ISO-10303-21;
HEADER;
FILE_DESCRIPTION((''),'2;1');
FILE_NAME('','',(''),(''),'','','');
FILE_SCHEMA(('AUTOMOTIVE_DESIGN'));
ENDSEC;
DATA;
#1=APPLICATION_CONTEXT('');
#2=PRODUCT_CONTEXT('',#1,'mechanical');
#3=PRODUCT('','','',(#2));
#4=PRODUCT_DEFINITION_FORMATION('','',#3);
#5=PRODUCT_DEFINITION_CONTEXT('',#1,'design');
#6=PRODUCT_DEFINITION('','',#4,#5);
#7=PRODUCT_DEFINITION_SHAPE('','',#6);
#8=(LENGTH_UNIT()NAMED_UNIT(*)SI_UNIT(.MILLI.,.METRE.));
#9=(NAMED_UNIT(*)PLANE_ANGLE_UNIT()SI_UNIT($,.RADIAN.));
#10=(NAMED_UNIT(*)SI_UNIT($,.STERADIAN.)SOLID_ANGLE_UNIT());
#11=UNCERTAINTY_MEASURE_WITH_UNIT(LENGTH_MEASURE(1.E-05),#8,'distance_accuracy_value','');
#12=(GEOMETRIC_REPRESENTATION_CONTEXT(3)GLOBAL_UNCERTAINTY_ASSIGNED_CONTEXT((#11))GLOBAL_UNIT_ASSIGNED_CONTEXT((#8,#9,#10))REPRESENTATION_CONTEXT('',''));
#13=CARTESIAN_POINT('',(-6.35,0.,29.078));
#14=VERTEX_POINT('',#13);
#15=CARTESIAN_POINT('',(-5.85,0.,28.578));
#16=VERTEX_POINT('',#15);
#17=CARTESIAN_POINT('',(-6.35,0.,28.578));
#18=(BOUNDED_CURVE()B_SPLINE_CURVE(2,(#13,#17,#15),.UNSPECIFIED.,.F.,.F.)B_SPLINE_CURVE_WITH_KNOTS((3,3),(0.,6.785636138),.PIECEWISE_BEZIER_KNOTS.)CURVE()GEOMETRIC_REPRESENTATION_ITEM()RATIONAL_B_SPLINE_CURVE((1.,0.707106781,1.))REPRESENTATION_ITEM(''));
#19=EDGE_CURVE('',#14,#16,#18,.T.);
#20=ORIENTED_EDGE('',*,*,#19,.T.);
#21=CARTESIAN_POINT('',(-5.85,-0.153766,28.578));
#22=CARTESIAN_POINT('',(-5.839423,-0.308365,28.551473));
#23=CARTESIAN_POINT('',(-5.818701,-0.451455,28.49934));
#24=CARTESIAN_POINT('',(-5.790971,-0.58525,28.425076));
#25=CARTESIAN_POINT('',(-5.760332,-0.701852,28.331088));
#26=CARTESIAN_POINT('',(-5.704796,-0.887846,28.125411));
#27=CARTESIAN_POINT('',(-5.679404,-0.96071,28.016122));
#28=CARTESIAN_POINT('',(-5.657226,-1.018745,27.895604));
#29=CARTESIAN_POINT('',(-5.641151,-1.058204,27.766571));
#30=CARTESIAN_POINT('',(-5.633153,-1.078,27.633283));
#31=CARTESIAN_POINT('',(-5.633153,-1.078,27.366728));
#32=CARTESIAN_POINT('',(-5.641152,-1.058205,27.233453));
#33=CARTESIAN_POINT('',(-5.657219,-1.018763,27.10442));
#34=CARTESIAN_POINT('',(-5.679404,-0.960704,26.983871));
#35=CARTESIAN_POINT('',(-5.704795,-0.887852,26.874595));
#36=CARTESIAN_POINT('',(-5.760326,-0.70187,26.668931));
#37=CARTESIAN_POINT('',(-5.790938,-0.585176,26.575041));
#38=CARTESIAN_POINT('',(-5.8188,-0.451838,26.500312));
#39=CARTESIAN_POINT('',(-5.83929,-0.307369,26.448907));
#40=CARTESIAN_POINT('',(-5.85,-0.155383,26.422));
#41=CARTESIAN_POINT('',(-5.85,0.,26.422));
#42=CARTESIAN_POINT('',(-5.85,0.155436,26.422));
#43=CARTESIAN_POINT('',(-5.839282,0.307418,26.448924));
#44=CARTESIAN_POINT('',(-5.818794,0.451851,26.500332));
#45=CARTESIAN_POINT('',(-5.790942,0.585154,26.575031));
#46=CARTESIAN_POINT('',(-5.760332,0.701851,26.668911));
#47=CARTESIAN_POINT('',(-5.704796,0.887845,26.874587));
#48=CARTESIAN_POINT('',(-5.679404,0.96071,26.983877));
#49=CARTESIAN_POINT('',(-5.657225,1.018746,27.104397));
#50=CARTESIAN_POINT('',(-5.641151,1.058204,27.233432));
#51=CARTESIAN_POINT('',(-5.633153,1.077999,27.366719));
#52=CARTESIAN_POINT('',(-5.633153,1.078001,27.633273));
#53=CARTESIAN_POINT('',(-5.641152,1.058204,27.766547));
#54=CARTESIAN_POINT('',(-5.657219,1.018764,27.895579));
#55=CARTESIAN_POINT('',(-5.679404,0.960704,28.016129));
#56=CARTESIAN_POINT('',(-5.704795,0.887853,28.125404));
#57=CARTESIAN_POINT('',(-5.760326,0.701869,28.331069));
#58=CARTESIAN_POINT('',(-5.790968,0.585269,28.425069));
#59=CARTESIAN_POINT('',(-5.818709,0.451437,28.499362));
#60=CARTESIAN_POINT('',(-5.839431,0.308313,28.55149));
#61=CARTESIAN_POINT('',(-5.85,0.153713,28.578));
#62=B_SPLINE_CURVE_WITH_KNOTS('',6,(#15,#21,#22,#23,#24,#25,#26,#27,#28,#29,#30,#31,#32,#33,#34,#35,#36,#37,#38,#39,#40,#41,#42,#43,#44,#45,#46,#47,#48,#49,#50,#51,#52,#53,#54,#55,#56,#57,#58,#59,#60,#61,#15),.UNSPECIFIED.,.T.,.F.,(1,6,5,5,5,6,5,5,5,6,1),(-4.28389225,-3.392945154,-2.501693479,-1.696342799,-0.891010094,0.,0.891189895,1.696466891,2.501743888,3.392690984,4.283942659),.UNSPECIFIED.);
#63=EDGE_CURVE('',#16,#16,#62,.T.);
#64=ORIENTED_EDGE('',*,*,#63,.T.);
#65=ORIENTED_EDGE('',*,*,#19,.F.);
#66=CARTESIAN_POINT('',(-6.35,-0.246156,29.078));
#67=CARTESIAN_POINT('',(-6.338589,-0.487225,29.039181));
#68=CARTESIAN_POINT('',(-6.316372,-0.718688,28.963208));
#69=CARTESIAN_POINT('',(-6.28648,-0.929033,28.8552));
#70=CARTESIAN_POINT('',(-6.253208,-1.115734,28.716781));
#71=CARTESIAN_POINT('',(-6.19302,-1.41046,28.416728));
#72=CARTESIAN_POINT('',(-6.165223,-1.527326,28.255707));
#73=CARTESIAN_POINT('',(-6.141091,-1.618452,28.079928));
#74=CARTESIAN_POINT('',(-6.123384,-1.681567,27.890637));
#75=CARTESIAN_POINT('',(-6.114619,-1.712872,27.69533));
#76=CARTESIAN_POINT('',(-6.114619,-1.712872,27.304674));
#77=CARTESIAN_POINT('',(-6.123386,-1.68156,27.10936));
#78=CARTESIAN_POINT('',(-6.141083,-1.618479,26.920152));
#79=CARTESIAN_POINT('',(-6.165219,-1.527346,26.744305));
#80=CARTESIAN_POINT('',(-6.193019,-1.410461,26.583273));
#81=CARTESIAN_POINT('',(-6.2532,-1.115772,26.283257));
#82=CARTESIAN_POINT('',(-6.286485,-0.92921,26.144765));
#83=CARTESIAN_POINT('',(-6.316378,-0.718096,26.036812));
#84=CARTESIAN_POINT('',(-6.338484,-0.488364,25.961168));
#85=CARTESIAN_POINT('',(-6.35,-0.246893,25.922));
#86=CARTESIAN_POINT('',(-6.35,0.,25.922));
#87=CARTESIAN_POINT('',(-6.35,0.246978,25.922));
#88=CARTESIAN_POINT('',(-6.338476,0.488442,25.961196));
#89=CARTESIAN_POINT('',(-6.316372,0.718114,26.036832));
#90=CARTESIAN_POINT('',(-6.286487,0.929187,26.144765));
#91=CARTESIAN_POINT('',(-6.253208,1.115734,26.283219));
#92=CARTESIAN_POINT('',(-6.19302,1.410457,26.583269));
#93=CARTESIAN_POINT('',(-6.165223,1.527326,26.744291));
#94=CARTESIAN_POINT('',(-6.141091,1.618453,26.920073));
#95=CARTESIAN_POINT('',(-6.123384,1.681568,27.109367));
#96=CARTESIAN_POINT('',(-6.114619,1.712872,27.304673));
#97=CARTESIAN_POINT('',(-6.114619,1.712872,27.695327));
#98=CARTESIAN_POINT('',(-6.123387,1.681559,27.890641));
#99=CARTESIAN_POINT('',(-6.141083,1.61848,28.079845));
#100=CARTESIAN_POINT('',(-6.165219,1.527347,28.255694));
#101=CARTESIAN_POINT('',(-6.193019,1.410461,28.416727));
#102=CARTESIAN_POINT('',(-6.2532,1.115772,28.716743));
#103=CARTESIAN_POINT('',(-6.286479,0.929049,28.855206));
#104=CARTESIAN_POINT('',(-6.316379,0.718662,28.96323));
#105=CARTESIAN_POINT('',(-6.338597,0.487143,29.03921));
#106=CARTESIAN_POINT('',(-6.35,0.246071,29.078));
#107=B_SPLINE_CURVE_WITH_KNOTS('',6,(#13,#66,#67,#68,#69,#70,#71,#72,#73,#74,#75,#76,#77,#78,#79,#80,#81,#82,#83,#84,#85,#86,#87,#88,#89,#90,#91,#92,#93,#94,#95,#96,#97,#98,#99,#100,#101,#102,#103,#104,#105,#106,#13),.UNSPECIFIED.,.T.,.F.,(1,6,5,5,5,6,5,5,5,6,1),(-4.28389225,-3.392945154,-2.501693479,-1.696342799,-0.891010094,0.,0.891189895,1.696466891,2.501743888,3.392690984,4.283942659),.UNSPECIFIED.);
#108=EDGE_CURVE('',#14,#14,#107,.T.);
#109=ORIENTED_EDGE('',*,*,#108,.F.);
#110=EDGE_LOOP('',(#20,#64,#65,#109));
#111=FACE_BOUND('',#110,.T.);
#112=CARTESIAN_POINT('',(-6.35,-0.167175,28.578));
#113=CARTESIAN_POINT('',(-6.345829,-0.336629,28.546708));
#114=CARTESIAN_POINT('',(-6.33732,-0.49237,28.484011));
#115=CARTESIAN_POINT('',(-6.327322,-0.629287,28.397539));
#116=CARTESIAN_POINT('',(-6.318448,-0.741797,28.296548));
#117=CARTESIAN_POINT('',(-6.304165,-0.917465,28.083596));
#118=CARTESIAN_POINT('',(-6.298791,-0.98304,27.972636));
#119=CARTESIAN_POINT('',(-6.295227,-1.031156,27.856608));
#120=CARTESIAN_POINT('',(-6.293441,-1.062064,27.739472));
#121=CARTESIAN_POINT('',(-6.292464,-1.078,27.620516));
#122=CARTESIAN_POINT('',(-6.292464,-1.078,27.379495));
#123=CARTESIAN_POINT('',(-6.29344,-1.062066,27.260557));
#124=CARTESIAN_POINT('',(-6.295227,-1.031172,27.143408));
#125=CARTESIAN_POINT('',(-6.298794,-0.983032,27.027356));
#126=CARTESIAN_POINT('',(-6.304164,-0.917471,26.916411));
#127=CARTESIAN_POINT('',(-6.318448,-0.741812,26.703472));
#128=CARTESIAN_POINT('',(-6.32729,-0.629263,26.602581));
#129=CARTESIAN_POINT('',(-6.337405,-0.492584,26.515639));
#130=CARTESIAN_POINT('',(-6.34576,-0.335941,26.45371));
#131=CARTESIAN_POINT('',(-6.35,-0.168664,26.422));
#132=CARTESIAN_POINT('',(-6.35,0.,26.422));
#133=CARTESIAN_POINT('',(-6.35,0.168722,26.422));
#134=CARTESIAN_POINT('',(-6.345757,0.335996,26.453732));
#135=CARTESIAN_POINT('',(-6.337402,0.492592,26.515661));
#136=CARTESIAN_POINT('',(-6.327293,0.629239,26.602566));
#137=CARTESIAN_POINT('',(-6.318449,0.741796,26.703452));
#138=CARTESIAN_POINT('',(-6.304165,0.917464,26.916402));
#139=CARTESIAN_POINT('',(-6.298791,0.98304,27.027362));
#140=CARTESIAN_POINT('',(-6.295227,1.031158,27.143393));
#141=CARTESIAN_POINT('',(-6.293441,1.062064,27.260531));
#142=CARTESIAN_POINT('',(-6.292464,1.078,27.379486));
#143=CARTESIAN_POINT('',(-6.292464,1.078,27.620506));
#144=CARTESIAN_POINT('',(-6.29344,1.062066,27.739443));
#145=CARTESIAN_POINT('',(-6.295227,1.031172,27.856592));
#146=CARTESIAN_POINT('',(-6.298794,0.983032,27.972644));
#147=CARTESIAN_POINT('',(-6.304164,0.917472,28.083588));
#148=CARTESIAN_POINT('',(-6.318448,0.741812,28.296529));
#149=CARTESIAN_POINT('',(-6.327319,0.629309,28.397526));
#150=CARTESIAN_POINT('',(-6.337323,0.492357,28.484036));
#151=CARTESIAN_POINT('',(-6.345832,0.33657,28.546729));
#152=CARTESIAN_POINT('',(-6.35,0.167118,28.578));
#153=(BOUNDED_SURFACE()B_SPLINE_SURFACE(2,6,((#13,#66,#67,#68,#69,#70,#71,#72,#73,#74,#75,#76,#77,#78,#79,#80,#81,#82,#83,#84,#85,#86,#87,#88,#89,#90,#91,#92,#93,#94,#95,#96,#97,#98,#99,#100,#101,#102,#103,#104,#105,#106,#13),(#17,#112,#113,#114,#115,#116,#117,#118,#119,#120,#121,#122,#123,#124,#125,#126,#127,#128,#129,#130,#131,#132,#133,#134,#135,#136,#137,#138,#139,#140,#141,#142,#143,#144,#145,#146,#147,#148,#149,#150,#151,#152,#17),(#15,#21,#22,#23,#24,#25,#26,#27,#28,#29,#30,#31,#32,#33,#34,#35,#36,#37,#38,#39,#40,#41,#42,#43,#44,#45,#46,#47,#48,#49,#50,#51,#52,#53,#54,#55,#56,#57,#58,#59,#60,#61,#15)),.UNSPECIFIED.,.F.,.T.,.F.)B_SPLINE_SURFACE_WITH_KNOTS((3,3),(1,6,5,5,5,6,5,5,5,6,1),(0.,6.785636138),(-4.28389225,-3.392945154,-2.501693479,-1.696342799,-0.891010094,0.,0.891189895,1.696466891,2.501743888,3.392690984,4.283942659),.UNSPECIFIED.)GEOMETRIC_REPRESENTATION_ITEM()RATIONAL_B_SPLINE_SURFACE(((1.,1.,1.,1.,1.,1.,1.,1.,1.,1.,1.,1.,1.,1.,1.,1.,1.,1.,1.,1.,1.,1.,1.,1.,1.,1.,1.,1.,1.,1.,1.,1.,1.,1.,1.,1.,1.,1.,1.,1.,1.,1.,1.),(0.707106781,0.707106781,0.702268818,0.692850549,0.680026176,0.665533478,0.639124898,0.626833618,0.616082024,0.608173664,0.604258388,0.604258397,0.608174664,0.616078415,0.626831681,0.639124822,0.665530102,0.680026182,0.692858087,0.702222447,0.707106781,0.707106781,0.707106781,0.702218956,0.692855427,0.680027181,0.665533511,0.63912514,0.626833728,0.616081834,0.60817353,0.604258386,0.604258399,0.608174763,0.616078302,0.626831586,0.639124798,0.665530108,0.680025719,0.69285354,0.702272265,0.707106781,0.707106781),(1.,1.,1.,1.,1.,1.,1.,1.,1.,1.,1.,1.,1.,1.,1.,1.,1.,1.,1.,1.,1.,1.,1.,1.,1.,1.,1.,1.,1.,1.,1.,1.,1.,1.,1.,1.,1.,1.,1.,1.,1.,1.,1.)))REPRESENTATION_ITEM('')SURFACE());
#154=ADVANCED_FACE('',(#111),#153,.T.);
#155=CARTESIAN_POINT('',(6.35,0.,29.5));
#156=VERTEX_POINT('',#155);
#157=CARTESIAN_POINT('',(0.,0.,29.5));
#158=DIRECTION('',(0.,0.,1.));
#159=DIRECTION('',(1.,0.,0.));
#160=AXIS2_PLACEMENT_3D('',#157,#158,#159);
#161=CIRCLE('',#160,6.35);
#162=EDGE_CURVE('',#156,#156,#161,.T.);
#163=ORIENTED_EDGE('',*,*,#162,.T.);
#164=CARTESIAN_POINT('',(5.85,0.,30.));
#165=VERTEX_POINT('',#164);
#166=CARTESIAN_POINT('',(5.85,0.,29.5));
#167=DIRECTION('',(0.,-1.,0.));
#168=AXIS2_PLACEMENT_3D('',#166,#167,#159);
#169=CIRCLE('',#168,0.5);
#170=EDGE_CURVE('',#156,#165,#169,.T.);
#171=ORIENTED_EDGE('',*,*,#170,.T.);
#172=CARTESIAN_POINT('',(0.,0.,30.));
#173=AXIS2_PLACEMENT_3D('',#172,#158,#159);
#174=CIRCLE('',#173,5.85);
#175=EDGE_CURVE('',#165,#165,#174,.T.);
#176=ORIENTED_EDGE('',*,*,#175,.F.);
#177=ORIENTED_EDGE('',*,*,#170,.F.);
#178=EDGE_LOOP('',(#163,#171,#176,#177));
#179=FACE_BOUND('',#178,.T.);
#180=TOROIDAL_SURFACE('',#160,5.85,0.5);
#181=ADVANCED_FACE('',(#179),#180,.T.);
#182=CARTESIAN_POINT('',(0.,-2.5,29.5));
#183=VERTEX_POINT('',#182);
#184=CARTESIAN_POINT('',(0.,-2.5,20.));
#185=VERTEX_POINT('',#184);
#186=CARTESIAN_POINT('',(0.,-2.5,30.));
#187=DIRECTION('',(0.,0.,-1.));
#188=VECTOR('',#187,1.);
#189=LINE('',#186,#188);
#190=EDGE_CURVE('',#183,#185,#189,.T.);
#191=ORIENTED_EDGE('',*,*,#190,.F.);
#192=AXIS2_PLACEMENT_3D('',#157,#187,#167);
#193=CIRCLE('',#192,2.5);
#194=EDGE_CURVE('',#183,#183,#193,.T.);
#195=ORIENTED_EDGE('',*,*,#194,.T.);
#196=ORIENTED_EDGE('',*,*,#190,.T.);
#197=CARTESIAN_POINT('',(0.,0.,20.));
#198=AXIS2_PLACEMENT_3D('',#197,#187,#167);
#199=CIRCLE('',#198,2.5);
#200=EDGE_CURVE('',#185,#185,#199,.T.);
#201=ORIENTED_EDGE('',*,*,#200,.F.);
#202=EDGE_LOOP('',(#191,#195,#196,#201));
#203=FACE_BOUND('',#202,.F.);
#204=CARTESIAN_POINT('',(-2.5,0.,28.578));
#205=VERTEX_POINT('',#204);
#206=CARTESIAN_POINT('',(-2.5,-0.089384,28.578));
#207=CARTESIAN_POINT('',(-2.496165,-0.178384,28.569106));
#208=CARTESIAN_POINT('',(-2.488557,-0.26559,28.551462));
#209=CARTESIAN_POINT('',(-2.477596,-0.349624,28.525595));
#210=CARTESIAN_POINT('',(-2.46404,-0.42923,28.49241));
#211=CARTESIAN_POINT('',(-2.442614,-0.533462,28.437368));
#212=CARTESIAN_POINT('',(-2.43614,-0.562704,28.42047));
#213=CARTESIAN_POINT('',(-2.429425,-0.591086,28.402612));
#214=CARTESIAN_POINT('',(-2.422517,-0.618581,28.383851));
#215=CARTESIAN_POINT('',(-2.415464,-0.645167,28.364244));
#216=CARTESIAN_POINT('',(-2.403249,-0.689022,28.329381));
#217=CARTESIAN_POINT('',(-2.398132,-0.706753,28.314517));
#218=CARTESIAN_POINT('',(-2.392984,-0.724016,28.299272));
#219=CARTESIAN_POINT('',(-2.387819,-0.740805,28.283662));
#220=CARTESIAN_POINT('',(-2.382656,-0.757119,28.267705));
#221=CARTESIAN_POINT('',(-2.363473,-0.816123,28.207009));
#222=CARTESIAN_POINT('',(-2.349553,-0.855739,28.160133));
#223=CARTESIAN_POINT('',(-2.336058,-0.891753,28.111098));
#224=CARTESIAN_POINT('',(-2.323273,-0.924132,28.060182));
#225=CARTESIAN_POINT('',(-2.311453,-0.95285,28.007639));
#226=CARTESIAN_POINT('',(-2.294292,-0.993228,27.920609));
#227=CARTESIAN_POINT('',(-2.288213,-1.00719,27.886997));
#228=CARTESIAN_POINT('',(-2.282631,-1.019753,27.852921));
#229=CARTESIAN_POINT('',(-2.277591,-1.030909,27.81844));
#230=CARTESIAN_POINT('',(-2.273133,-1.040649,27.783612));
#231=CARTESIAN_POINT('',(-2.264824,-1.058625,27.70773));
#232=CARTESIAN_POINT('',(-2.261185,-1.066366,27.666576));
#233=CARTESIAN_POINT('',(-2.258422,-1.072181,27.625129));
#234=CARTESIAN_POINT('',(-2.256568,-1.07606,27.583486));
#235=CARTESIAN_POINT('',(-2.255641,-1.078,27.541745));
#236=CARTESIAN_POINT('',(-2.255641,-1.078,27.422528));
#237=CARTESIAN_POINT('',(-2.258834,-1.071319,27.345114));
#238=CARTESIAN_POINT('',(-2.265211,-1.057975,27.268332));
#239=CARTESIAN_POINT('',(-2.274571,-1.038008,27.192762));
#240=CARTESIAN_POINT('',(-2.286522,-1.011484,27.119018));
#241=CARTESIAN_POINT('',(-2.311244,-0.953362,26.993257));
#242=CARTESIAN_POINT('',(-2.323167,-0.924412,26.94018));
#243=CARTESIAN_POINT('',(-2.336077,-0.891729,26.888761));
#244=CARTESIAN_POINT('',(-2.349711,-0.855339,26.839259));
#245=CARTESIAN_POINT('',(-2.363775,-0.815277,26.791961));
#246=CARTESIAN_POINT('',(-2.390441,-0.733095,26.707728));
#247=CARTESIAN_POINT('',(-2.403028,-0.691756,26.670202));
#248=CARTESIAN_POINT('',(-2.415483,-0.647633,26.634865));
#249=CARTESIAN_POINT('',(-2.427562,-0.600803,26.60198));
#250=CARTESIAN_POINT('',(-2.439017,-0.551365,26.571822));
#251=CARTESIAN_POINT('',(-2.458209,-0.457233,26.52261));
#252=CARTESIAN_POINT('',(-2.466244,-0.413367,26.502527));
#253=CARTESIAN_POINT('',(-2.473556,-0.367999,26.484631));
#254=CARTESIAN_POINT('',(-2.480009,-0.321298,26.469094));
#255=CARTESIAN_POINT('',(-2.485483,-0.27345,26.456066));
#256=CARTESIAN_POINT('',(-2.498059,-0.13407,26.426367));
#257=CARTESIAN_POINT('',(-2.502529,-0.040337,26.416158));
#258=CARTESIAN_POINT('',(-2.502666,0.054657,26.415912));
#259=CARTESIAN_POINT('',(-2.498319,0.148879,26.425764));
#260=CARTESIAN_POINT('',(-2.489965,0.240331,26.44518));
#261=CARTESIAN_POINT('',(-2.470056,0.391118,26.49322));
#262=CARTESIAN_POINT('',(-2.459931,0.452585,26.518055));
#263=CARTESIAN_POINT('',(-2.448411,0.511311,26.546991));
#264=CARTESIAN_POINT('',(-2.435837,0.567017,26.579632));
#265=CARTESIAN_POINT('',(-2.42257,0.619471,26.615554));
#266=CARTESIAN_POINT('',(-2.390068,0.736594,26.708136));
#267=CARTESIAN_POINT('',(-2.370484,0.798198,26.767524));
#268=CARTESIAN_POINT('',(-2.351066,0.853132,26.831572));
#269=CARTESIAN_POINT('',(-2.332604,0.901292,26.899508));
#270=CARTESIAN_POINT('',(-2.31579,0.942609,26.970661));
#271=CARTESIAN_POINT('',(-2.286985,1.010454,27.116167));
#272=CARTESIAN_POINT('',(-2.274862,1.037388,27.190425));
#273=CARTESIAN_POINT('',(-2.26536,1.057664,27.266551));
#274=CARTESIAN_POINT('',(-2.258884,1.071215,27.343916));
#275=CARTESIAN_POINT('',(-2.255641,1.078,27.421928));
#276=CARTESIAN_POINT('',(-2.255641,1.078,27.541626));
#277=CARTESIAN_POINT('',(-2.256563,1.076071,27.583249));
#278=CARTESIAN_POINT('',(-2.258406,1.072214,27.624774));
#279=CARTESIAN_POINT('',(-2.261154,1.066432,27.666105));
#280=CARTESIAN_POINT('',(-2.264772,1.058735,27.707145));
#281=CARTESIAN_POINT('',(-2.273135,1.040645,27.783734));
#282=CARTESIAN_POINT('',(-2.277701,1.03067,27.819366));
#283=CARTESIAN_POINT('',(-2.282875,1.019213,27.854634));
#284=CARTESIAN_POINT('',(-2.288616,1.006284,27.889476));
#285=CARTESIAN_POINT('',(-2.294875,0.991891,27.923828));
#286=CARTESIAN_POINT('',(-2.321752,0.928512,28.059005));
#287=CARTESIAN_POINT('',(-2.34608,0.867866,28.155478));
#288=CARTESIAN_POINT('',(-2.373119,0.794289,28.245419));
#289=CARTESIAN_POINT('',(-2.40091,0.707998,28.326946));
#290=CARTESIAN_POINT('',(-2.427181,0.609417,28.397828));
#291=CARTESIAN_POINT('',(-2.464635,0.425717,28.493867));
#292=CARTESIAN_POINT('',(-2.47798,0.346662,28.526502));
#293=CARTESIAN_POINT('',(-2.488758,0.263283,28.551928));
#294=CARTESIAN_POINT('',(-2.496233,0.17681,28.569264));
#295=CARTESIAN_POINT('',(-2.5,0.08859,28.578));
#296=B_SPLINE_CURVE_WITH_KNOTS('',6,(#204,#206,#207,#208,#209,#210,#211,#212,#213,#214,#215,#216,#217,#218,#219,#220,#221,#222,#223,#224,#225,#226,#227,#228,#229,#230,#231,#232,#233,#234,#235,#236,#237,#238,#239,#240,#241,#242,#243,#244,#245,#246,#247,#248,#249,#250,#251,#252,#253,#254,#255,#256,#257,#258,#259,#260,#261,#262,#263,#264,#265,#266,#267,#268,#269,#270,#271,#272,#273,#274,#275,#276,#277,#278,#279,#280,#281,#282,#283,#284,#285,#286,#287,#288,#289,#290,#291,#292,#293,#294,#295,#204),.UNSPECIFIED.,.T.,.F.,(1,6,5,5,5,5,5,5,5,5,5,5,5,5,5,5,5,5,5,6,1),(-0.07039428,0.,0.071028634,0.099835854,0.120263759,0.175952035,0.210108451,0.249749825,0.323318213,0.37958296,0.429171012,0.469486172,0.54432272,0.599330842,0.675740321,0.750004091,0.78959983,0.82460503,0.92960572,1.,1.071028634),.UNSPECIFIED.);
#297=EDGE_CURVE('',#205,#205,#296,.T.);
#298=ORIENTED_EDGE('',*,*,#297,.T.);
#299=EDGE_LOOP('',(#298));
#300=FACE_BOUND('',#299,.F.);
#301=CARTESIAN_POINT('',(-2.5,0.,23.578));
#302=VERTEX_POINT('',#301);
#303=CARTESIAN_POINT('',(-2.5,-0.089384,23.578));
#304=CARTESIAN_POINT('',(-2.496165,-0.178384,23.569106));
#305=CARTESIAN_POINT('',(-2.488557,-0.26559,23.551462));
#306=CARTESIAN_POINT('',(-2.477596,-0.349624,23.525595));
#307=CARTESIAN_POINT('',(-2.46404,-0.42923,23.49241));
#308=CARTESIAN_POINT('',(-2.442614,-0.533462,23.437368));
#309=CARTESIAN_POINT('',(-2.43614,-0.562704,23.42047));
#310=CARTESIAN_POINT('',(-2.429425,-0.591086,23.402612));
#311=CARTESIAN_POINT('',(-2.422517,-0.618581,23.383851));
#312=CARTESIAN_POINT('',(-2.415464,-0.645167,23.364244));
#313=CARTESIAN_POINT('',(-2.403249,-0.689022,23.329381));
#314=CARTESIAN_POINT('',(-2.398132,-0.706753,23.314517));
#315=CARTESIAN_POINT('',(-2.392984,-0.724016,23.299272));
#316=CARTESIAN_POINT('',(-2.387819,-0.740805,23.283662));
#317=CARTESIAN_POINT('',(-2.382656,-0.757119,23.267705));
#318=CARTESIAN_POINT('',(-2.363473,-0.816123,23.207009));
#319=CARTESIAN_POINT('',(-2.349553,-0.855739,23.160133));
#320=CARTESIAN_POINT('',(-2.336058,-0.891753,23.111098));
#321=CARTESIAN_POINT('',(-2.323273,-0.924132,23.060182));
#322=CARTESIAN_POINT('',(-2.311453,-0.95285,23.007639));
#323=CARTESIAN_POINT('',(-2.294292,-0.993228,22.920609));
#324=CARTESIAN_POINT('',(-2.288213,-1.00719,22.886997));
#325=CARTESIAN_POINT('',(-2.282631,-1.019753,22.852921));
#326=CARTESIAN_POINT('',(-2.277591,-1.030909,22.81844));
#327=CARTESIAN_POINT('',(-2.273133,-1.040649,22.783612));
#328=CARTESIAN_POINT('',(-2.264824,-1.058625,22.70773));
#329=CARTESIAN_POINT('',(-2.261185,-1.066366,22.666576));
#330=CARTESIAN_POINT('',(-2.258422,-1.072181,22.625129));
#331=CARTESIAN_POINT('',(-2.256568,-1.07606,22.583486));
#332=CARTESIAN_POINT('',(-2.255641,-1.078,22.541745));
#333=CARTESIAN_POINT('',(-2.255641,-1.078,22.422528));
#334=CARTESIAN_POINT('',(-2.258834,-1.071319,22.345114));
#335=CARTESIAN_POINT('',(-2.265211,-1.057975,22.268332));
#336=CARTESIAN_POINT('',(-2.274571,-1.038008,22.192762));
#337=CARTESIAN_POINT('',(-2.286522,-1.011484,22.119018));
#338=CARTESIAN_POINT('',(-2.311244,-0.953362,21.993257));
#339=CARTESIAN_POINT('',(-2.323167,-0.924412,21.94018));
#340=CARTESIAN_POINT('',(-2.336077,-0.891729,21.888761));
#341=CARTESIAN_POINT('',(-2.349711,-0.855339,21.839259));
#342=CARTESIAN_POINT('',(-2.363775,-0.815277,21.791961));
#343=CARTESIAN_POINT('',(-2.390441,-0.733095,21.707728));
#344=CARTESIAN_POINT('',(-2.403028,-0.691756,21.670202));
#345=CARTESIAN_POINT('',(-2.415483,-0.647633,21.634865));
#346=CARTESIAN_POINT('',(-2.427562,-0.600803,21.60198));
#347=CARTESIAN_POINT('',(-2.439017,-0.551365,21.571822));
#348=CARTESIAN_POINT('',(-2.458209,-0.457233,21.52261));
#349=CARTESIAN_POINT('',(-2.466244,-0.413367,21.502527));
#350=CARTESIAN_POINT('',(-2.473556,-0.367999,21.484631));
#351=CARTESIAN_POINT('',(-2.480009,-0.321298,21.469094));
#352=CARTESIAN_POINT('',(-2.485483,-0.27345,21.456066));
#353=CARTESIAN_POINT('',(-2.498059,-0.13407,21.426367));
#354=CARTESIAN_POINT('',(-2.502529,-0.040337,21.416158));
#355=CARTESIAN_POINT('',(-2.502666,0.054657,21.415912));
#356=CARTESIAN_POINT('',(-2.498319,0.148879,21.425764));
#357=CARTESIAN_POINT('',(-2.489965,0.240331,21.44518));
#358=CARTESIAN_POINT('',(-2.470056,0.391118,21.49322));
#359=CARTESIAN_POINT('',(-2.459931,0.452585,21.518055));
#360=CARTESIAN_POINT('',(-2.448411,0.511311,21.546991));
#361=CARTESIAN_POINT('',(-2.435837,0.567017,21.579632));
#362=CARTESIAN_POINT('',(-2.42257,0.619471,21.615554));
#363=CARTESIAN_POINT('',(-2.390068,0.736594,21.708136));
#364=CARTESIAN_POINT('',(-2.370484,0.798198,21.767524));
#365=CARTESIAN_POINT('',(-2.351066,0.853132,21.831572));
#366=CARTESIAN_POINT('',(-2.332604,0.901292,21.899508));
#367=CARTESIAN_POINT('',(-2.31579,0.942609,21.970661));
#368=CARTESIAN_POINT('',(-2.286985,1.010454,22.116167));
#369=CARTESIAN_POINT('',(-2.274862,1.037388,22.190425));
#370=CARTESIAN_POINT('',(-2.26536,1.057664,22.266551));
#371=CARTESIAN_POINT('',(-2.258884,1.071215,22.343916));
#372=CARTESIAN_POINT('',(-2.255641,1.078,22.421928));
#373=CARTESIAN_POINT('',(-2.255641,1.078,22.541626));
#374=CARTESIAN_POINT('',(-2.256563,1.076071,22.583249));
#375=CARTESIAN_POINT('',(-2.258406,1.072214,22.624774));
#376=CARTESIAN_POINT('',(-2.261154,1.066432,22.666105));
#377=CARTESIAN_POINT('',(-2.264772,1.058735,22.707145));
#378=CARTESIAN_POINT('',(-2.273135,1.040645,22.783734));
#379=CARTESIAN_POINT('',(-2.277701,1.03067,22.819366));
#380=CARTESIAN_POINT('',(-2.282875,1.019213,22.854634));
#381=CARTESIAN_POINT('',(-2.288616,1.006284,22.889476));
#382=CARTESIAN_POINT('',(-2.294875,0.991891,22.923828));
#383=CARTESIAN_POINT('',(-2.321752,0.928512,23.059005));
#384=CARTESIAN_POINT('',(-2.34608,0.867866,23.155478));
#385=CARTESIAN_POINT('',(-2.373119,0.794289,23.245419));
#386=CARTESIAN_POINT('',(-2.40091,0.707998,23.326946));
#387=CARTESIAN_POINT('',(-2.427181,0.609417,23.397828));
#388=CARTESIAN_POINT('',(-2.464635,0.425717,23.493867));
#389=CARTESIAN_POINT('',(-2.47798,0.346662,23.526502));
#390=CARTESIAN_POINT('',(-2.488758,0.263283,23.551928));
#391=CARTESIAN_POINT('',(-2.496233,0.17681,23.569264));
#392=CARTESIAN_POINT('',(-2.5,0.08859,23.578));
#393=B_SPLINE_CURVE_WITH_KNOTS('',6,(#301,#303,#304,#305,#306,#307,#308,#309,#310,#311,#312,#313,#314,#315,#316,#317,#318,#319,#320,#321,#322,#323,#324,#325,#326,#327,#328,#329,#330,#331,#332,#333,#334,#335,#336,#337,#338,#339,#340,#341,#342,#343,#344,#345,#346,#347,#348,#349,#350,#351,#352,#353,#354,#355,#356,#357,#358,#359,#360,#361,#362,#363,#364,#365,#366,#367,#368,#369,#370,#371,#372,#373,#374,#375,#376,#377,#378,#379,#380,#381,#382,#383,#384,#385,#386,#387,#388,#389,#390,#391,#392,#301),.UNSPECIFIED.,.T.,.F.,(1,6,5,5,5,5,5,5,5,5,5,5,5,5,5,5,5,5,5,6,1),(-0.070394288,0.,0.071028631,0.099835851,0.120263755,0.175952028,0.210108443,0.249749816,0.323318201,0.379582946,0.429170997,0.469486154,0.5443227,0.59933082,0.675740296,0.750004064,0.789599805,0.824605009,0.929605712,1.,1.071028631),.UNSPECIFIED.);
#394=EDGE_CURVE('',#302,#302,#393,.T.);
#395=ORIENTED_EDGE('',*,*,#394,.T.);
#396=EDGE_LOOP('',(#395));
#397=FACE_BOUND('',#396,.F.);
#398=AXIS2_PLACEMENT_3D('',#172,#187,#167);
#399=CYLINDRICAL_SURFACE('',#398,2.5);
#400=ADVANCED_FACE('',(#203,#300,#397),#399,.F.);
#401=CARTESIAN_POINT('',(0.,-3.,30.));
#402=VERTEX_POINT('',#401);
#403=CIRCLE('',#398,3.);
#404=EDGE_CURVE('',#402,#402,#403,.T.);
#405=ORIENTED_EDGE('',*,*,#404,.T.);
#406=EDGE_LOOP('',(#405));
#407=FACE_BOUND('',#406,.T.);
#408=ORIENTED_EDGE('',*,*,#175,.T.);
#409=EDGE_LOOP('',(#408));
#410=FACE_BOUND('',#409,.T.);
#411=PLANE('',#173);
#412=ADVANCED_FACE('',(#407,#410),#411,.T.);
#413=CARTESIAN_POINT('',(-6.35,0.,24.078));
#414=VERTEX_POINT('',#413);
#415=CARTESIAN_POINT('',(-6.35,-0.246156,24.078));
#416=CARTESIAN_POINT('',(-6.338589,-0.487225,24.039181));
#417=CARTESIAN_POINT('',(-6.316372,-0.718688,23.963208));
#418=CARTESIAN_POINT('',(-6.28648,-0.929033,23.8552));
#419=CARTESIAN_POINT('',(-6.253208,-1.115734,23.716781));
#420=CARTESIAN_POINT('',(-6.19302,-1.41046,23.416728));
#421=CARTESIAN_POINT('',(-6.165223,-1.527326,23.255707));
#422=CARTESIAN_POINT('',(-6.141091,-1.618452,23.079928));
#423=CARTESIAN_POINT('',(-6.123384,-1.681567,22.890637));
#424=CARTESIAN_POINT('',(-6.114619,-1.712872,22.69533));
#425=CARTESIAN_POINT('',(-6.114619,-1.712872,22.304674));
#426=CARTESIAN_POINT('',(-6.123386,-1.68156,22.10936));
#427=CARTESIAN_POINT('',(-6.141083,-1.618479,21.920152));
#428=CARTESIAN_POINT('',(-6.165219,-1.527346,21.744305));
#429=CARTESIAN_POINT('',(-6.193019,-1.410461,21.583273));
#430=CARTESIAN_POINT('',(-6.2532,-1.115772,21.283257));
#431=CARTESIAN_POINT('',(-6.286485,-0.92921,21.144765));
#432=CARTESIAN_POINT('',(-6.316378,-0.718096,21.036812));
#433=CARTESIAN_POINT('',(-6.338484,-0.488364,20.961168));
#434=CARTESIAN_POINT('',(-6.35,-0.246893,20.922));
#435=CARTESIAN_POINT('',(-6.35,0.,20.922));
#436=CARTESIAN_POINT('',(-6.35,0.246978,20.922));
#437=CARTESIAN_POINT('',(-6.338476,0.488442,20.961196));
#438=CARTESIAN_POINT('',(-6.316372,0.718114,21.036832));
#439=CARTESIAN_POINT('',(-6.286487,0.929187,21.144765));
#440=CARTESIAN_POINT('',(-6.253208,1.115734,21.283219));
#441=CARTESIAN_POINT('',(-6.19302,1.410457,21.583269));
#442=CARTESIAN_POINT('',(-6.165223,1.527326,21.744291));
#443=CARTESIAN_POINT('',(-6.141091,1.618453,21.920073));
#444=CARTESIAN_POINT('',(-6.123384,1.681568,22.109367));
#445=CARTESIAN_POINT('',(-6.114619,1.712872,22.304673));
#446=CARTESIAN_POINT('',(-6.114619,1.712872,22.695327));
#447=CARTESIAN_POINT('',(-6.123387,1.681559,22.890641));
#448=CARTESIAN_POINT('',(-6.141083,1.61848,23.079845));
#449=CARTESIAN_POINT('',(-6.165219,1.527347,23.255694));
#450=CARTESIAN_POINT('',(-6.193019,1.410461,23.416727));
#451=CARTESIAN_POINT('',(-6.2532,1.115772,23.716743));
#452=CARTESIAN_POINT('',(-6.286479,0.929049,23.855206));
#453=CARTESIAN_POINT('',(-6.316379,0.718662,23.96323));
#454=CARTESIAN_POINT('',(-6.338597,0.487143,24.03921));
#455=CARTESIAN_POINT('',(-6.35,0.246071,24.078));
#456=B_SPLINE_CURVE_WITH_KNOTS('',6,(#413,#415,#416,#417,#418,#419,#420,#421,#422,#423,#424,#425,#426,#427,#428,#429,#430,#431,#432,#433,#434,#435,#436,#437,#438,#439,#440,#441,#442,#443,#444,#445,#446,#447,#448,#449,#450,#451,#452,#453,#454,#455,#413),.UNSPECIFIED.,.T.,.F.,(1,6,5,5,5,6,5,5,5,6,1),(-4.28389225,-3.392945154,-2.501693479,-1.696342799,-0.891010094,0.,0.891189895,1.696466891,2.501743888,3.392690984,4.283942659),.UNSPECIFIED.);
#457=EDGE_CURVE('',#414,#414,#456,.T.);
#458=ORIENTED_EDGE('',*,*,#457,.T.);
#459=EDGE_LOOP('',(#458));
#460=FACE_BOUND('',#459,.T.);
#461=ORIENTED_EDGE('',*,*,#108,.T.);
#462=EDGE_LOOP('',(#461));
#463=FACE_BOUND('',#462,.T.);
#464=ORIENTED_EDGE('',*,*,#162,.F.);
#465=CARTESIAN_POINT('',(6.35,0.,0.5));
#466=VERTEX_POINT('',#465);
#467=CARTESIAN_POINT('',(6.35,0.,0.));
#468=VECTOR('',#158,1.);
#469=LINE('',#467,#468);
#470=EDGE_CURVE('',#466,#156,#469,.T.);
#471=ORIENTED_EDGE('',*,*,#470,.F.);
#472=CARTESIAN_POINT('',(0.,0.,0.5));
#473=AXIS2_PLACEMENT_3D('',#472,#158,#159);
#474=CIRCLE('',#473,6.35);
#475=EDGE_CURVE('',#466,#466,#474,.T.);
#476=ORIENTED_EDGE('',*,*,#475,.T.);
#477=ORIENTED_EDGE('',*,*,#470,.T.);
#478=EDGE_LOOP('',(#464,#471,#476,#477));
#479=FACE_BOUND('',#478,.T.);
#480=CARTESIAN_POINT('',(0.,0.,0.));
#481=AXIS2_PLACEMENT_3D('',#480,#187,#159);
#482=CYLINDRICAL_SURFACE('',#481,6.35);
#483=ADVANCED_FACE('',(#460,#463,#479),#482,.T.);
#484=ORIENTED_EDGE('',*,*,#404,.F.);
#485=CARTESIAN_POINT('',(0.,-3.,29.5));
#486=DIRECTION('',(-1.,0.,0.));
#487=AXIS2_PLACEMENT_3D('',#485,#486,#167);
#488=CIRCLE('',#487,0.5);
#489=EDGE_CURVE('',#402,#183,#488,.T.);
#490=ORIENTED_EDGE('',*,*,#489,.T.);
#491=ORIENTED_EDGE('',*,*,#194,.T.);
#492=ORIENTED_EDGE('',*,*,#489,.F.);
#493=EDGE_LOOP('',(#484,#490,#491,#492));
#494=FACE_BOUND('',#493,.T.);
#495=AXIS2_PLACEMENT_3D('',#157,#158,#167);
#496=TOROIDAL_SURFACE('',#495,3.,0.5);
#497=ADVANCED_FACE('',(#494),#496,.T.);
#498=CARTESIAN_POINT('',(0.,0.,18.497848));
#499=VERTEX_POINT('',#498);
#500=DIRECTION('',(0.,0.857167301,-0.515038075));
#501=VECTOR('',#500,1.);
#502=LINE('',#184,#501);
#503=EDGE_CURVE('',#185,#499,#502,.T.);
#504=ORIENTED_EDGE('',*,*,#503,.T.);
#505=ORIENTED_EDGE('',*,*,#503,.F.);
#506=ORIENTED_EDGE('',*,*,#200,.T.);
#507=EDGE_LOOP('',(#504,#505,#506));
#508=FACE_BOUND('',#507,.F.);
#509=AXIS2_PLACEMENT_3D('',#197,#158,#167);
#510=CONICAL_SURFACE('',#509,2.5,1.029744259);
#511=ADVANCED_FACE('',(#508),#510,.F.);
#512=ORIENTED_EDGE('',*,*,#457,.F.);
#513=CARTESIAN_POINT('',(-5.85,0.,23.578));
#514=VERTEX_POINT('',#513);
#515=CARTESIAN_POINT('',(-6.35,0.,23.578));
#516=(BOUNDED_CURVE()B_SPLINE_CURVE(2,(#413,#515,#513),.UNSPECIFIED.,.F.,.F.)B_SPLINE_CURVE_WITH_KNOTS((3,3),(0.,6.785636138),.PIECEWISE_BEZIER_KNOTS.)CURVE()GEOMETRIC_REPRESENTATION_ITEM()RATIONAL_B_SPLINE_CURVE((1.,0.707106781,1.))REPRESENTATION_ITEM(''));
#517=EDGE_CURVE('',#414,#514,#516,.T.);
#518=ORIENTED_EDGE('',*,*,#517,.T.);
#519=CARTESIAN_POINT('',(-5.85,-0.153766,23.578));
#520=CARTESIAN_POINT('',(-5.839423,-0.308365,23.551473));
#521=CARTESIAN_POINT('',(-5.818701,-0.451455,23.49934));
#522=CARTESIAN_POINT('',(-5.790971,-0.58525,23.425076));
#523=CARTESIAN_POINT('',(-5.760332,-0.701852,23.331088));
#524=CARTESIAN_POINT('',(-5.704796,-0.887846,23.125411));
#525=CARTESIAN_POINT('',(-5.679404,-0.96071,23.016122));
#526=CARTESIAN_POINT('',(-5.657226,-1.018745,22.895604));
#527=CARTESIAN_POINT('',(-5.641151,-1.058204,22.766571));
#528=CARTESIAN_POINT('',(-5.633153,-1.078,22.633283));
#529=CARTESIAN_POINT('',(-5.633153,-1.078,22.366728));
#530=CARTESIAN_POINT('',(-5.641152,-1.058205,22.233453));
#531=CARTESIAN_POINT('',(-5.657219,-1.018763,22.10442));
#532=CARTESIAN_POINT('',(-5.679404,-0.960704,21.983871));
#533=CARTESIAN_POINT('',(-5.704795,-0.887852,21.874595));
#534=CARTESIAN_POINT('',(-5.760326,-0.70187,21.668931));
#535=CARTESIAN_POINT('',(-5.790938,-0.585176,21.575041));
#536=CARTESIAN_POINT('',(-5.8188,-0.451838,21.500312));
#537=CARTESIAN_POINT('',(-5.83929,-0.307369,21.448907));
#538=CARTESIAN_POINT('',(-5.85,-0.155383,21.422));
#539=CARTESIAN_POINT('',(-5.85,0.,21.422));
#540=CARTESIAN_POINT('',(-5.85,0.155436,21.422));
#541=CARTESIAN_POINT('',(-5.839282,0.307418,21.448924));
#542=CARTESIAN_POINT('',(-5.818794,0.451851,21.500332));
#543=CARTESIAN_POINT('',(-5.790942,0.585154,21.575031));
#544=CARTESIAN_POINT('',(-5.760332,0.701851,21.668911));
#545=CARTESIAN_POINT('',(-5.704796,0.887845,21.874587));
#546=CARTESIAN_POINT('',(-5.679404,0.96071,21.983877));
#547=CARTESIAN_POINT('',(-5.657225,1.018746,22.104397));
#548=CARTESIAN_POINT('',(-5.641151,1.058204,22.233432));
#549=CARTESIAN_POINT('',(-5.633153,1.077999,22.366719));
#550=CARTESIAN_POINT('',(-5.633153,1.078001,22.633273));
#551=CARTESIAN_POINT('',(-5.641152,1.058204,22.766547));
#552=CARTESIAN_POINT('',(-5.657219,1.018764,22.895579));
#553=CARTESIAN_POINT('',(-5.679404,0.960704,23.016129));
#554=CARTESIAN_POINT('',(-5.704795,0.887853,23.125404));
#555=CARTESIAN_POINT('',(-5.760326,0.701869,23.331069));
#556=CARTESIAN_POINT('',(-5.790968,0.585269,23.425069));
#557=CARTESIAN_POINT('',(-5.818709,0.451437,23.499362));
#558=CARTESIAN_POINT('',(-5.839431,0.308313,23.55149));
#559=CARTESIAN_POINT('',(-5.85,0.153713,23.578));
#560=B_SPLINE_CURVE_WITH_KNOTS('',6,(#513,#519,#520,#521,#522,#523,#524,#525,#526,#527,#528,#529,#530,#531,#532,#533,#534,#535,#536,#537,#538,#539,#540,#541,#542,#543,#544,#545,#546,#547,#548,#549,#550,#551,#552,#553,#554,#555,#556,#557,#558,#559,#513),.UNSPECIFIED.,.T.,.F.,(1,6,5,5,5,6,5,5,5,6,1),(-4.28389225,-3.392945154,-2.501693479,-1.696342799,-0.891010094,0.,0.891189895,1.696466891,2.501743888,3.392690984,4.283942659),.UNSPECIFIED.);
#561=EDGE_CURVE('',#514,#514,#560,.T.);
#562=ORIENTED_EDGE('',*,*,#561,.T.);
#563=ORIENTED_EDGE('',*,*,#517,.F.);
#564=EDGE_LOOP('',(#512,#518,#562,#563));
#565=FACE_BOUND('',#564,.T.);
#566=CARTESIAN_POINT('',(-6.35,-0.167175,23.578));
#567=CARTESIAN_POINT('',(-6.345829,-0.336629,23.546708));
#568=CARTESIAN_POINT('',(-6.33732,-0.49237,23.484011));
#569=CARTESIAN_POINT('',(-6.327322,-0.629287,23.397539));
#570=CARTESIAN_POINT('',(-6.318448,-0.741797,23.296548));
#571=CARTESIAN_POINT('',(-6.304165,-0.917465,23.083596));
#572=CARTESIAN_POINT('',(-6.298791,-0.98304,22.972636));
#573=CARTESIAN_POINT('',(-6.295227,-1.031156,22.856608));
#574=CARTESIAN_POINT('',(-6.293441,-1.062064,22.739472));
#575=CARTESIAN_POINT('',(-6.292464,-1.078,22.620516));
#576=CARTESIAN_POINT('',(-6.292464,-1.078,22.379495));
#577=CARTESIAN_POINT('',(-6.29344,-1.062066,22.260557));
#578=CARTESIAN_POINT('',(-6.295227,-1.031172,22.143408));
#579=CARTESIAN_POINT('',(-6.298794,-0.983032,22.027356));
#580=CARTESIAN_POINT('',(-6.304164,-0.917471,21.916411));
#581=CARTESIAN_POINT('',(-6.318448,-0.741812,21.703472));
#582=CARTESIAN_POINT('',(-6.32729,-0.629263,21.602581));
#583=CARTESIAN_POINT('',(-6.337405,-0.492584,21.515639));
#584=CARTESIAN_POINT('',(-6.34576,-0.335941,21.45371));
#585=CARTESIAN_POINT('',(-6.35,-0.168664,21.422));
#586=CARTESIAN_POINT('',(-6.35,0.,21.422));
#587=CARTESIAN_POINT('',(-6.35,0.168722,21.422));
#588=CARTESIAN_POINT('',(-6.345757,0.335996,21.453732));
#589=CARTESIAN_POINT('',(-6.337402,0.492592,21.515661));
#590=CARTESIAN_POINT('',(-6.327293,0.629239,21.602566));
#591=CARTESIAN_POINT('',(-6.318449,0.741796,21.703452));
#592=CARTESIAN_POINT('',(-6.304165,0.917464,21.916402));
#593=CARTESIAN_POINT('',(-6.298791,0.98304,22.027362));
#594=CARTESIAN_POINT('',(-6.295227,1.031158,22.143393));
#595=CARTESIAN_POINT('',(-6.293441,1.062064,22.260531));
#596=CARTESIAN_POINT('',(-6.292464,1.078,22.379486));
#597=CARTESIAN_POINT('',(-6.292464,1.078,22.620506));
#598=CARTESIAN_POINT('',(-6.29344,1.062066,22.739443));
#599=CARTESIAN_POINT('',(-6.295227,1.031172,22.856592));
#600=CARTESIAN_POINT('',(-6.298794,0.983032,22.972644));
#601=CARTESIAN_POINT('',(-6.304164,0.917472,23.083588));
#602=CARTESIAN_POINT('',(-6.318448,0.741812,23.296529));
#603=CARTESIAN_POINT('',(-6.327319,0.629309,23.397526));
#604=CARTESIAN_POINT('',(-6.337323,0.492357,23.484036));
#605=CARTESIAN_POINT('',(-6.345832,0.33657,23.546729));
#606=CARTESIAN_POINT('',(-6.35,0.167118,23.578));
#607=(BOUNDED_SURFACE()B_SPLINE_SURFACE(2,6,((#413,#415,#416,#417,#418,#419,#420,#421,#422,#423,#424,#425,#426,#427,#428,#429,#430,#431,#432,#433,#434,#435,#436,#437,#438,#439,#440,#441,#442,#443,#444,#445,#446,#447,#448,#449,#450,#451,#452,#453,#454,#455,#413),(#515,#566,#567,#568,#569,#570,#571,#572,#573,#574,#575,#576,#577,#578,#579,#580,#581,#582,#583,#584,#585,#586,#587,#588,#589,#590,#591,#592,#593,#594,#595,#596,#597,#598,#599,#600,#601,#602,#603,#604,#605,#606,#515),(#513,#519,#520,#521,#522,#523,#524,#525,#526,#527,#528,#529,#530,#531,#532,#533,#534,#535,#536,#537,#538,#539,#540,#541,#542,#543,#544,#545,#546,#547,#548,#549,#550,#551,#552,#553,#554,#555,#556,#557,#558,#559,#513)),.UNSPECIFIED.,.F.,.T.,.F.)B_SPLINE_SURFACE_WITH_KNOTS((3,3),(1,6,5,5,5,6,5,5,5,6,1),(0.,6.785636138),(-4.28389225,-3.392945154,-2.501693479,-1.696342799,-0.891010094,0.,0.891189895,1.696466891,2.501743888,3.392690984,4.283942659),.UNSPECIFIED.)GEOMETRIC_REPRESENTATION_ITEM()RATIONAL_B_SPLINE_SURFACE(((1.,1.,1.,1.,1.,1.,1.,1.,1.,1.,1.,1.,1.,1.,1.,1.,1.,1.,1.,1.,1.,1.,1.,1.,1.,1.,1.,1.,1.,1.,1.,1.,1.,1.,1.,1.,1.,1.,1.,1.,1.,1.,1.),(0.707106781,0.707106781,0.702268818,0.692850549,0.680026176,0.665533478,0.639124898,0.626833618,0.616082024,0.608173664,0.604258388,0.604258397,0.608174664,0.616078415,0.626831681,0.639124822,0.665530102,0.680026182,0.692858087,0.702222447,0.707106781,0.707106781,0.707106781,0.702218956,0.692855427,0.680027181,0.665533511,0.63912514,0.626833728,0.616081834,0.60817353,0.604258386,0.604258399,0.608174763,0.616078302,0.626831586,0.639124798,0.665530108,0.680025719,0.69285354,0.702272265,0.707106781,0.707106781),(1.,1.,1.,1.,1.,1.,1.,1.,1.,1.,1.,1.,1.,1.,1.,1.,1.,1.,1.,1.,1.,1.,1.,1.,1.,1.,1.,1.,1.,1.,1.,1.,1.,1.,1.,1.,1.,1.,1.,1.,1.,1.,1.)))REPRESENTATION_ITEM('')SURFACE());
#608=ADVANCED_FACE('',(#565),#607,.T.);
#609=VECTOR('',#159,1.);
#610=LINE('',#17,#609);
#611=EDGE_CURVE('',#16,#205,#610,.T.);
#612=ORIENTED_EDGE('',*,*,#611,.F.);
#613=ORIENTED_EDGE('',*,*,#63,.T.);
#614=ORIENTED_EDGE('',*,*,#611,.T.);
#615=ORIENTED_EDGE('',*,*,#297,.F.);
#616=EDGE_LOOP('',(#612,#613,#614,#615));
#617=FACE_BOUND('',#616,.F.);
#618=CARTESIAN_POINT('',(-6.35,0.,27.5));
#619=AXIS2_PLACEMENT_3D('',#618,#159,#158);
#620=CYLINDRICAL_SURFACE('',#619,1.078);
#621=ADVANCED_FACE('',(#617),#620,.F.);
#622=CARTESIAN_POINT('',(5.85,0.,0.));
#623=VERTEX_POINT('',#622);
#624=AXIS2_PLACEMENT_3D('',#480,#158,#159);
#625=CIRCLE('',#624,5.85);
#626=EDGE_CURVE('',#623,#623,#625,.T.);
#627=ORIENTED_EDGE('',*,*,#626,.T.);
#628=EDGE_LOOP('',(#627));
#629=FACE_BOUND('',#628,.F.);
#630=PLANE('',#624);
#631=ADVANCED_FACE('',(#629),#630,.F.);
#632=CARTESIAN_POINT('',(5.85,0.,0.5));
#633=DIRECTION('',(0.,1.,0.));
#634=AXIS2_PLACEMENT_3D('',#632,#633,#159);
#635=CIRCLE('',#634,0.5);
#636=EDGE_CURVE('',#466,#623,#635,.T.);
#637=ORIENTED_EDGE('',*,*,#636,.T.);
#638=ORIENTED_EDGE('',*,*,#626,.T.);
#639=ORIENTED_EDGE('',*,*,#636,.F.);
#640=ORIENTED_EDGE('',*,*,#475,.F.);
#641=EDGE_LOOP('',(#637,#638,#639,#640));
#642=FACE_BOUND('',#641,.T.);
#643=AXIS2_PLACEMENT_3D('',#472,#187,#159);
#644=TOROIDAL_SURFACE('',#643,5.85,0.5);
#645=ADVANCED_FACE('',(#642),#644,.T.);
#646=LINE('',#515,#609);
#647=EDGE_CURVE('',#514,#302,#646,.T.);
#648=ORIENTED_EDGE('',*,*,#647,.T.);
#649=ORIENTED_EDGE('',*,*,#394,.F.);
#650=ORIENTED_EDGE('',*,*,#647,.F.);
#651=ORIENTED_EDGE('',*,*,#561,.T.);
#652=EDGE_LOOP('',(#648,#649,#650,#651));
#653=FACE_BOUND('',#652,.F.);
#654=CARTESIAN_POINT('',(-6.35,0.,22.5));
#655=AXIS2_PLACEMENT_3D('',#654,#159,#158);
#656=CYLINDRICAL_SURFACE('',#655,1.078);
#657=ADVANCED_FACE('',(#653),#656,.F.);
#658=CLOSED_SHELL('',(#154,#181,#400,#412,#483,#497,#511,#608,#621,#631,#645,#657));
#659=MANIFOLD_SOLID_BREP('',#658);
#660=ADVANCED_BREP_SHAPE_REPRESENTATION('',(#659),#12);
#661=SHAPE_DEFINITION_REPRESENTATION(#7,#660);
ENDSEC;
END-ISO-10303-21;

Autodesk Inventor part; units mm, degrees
ref_plane "XZ Plane" through (0, 0, 0) normal (0, 1, 0) x (-1, 0, 0)
ref_plane "XY Plane" through (0, 0, 0) normal (0, 0, 1) x (1, 0, 0)
sketch "Sketch1" plane through (0, 0, 0) normal (0, 0, 1) x (1, 0, 0)
  circle A0 centre (0, 0) radius 6.35
  dimension "d0" = 12.7
extrude "Extrusion1" add sketch "Sketch1" along normal blind 30
hole "Hole1" at (0, 0, 30) direction (0, 0, -1) diameter 5 depth 10 tip angle 118
fillet "Fillet1" radius 0.5 3 edges at (0, 2.5, 30) (-6.35, 0, 30) (-6.35, 0, 0)
ref_plane "Work Plane1" through (-6.35, 0, 0) normal (1, 0, 0) x (0, 1, 0)
sketch "Sketch2" plane through (-6.35, 0, 0) normal (1, 0, 0) x (0, 1, 0)
  line L0 (0, 50.0021) -> (0, 0) construction
  line L1 (-5.85, 30) -> (5.85, 30) construction
  point P0 (0, 27.5)
  point P1 (0, 22.5)
  dimension "d23" = 2.5
  dimension "d24" = 5
hole "Hole3" at (-6.35, 0, 27.5) at (-6.35, 0, 22.5) direction (1, 0, 0) diameter 2.156 end up to surface thread size "4-40 UNC" class "2B" standard "ANSI Unified Screw Threads"
fillet "Fillet2" radius 0.5 4 edges at (-6.2578, 1.078, 27.4975) (-6.2578, -1.078, 27.4972) (-6.2578, 1.078, 22.4975) (-6.2578, -1.078, 22.4972)
properties part number "Roller" material "Nylon-6/6"
